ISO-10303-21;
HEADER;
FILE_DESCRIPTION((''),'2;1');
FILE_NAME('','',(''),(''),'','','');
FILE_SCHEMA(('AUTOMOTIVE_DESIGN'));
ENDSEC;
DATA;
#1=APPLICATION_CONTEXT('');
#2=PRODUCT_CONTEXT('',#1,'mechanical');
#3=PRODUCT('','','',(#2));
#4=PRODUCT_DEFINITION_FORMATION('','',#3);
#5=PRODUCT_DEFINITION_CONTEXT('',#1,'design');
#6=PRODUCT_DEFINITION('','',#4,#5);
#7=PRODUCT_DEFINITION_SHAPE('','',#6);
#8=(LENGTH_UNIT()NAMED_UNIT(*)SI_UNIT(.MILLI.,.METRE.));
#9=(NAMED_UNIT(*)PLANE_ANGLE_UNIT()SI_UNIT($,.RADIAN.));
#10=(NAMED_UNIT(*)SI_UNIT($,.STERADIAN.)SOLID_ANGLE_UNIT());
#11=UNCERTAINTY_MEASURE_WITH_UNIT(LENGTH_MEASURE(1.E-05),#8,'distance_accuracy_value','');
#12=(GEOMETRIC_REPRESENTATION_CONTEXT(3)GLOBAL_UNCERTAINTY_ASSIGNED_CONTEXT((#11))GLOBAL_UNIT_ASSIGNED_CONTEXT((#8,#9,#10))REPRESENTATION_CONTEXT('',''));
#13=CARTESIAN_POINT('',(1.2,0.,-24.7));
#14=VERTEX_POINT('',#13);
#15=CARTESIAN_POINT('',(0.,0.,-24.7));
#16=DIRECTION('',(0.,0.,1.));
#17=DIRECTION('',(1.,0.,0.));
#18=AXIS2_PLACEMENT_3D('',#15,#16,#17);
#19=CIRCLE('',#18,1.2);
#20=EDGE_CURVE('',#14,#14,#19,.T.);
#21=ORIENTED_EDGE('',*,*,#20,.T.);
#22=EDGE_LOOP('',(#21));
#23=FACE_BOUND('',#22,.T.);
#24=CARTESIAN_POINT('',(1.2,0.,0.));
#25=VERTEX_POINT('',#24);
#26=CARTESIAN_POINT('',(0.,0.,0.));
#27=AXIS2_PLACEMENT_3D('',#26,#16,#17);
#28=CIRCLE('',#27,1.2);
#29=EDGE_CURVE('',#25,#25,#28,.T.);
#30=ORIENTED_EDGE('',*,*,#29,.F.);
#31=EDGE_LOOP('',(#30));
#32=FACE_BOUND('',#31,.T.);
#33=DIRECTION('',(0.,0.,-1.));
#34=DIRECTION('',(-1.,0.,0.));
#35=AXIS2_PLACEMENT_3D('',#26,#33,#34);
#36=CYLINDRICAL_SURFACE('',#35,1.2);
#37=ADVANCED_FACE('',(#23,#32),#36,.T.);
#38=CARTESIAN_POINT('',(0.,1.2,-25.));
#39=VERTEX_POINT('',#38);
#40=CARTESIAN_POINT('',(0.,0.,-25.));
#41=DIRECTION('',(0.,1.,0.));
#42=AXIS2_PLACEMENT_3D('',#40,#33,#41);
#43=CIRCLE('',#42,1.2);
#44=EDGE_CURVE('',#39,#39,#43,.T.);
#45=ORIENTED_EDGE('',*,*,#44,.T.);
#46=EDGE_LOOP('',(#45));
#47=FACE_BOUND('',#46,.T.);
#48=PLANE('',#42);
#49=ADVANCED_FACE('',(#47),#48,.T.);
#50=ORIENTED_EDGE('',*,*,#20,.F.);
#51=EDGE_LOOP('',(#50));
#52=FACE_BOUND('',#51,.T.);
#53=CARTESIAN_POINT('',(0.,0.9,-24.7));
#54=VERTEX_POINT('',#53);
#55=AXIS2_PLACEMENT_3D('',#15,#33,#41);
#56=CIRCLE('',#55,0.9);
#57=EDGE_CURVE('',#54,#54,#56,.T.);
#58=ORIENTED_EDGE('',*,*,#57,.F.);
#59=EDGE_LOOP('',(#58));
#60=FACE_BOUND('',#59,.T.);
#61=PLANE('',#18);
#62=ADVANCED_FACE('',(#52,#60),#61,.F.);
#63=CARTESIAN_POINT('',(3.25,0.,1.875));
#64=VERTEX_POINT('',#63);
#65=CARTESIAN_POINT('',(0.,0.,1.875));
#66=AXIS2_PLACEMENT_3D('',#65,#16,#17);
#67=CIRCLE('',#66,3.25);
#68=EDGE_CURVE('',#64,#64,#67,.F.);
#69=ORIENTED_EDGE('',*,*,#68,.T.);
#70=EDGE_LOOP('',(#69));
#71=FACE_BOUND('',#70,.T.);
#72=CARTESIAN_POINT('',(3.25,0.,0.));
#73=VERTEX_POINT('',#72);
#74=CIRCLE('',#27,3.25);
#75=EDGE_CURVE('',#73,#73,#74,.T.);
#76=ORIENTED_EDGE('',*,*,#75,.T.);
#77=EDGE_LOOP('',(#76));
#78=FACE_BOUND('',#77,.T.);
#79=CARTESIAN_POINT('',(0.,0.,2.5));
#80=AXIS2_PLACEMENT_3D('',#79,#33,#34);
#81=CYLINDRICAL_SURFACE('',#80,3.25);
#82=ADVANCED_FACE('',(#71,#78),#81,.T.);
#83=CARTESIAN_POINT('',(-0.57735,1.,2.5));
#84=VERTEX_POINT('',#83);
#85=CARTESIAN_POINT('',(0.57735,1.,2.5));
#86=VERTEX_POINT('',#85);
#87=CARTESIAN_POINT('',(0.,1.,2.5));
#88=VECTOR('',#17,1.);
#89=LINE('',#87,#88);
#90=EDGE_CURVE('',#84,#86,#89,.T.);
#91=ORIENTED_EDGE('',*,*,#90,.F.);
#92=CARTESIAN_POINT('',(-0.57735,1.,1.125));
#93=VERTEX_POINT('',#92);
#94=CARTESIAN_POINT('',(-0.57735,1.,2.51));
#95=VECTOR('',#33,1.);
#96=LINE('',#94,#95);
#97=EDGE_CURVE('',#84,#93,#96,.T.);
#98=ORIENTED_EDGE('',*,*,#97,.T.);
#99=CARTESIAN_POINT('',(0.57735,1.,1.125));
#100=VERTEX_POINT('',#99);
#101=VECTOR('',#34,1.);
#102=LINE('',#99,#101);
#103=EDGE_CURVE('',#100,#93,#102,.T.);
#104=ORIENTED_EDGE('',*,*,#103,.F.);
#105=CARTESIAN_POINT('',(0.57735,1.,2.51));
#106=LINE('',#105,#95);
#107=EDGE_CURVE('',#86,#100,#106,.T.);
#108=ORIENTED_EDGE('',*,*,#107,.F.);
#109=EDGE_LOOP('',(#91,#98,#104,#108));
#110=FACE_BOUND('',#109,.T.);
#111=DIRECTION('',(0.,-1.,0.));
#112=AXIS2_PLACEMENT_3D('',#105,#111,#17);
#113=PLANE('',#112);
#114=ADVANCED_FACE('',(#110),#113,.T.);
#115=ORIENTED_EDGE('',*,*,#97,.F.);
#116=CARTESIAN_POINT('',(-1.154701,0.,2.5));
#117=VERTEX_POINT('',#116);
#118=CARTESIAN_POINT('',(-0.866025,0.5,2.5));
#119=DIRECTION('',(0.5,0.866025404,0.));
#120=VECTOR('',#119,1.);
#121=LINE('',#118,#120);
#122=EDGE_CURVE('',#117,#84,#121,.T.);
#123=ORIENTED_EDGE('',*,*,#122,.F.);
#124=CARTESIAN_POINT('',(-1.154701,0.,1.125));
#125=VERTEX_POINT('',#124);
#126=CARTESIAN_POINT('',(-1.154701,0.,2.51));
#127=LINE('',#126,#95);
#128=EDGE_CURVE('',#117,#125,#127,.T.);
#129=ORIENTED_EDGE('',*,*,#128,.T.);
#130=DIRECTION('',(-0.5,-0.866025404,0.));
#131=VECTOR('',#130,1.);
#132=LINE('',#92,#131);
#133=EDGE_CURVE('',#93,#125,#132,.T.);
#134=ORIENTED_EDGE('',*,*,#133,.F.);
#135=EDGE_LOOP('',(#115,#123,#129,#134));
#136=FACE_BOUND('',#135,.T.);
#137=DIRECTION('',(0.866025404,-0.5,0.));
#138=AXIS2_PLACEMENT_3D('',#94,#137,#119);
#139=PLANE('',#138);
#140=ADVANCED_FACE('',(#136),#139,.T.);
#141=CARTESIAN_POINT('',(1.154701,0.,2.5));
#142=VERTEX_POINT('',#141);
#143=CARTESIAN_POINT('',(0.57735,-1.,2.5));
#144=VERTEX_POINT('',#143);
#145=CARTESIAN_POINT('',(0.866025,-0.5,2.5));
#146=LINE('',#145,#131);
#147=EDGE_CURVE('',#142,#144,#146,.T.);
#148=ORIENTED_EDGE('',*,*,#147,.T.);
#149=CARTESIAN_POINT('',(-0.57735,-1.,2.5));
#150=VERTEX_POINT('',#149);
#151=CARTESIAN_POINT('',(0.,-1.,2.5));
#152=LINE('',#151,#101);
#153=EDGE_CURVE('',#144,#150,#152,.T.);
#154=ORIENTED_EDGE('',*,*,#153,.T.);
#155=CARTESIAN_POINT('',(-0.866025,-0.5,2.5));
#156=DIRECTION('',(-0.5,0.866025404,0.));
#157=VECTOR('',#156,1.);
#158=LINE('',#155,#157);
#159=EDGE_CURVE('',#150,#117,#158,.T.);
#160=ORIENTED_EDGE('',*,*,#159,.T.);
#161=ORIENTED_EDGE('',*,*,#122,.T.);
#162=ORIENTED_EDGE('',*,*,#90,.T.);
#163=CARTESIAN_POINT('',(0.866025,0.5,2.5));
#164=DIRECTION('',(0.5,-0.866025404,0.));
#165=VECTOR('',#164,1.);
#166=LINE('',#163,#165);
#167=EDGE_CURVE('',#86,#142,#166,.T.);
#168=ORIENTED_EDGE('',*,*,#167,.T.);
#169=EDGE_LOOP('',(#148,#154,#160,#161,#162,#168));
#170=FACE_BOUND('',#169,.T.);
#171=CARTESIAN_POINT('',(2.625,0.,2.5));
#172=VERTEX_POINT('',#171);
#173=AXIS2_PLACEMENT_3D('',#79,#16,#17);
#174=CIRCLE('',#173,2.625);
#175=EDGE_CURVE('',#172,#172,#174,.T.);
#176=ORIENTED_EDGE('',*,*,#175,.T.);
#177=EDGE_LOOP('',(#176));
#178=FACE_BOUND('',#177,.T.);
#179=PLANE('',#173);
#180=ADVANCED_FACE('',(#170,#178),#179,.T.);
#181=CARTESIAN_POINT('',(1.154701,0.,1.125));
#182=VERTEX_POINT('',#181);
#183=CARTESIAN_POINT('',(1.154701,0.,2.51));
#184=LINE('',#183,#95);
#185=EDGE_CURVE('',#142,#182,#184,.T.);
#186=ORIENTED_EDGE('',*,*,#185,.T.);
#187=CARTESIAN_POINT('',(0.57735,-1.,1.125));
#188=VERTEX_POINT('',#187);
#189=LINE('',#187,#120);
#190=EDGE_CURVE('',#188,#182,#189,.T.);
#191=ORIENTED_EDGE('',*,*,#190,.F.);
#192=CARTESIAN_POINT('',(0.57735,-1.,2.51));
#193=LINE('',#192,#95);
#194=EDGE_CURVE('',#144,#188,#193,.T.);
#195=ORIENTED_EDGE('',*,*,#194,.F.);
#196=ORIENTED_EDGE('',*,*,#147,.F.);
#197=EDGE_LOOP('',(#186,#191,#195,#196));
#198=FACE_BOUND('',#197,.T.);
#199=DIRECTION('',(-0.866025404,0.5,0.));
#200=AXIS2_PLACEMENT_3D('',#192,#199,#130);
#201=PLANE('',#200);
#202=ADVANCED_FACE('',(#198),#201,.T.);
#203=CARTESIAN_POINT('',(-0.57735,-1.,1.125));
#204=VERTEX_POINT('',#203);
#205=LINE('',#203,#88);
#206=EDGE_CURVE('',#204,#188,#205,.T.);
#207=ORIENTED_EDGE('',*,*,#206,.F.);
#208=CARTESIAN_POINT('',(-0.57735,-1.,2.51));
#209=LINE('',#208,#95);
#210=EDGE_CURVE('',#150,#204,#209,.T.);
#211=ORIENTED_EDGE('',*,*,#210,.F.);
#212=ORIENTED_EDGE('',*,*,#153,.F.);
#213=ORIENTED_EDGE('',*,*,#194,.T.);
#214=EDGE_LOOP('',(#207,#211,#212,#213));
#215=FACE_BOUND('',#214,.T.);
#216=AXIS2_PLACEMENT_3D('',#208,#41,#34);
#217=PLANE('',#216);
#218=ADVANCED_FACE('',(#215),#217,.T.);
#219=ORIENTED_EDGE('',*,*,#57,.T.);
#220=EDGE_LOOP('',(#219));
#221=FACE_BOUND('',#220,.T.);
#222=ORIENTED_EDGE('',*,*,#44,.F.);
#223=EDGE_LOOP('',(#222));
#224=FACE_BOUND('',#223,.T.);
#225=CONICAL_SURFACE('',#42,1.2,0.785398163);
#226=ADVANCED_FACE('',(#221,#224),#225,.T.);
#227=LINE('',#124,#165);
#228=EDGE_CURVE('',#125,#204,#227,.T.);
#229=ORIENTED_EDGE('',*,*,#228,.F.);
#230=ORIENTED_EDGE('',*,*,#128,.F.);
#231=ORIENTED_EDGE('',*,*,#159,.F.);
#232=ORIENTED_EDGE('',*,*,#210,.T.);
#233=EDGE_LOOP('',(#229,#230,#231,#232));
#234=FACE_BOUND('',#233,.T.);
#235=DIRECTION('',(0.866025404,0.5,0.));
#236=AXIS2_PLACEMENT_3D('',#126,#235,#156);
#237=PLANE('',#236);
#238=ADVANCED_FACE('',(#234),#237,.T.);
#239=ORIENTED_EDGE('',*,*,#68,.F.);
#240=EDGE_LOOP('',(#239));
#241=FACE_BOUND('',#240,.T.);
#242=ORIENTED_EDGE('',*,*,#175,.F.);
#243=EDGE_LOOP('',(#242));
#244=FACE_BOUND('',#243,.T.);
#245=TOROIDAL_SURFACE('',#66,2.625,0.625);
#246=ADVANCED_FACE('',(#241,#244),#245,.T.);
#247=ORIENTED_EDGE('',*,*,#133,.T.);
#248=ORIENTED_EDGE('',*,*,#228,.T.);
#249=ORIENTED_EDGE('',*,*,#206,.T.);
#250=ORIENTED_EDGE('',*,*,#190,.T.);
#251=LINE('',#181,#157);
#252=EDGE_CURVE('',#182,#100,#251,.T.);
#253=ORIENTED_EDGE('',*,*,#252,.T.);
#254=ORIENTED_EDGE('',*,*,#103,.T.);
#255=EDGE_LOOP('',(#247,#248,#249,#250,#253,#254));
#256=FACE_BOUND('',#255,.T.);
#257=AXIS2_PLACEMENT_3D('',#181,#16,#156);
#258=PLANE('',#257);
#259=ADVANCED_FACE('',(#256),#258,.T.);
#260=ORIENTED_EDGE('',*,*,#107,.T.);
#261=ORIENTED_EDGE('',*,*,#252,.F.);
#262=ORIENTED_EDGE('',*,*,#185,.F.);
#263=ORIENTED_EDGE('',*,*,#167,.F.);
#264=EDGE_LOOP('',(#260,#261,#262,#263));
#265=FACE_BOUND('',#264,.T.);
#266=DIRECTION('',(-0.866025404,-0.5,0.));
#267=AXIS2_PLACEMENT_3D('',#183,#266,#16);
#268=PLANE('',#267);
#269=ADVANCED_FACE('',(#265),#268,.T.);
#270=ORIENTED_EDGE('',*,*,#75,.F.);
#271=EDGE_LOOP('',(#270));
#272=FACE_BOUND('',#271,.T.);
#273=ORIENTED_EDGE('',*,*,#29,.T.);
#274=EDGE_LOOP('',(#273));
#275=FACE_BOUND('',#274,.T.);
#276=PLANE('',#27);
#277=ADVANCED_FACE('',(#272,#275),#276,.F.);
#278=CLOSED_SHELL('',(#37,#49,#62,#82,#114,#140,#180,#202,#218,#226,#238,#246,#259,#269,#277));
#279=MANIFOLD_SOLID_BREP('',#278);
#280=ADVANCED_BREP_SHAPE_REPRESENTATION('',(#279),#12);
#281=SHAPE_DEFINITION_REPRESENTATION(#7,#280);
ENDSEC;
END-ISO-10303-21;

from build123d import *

# Parameters (mm, degrees)
F_0105_CYLINDER_SKETCH_R    = 3.25
F_0105_CYLINDER_DEPTH       = 2.5
F_0106_FILLET_R             = 0.625
F_0107_EXTRUDE_DEPTH        = 1.385
F_0107_EXTRUDE_ROTATE_ANGLE = 120
F_0110_CYLINDER_SKETCH_R    = 1.2
F_0110_CYLINDER_DEPTH       = 24.7
F_0111_CONE_ROTATE_ANGLE    = 90


with BuildPart() as part:
    # 0105_cylinder_Sketch → 0105_cylinder (new body)
    with BuildSketch(Plane.XY):
        Circle(F_0105_CYLINDER_SKETCH_R)
    extrude(amount=F_0105_CYLINDER_DEPTH)

    # 0106_fillet
    f_0106_fillet_edges = [part.edges().sort_by_distance(p)[0] for p in [
        (-3.25, 0, 2.5),
    ]]
    fillet(f_0106_fillet_edges, radius=F_0106_FILLET_R)


with BuildPart() as body_2:
    # 0107_extrude_Sketch → 0107_extrude (new body)
    with BuildSketch(Plane.XY):
        Polygon((0, 0), (1.154700538, 0), (1.732050808, 1), (1.154700538, 2), (0, 2), (-0.577350269, 1), align=None)
    extrude(amount=F_0107_EXTRUDE_DEPTH)


with BuildPart() as body_2_1:
    # 0107_extrude_Rotate: read off the stored shape, not the designer's step
    # 0107_extrude_Rotate: moved
    add(body_2.part.rotate(Axis((0, 0, 0), (0, 0, 1)), F_0107_EXTRUDE_ROTATE_ANGLE))


with BuildPart() as body_2_2:
    # 0107_extrude_Translate: moved
    add(body_2_1.part.moved(Location((1.154700538, 0, 1.125))))


with BuildPart() as part_1:
    add(part.part)

    # 0109_sub: cut body 2
    add(body_2_2.part, mode=Mode.SUBTRACT)


with BuildPart() as body_2_2_1:
    # 0110_cylinder_Sketch → 0110_cylinder (new body)
    with BuildSketch(Plane.XY):
        Circle(F_0110_CYLINDER_SKETCH_R)
    extrude(amount=F_0110_CYLINDER_DEPTH)


with BuildPart() as body_2_2_2:
    # 0110_cylinder_Translate: moved
    add(body_2_2_1.part.moved(Location((0, 0, -24.7))))


with BuildPart() as body_3:
    # 0111_cone_Sketch → 0111_cone (revolve)
    with BuildSketch(Plane.XY, mode=Mode.PRIVATE) as f_0111_cone_sk:
        Polygon((0, 0), (1.2, 0), (0.9, 0.3), (0, 0.3), align=None)
    revolve(f_0111_cone_sk.sketch.rotate(Axis((0, -100, 0), (0, 1, 0)), 90), axis=Axis((0, -100, 0), (0, 1, 0)))


with BuildPart() as body_3_1:
    # 0111_cone_Rotate: moved
    add(body_3.part.rotate(Axis((0, 0, 0), (1, 0, 0)), F_0111_CONE_ROTATE_ANGLE))


with BuildPart() as body_3_2:
    # 0111_cone_Translate: moved
    add(body_3_1.part.moved(Location((0, 0, -25))))


with BuildPart() as body_2_2_3:
    add(body_2_2_2.part)

    # 0113_add: union body 3
    add(body_3_2.part)


with BuildPart() as part_2:
    add(part_1.part)

    # 0114_add: union body 2 2
    add(body_2_2_3.part)


solid = part_2.part
